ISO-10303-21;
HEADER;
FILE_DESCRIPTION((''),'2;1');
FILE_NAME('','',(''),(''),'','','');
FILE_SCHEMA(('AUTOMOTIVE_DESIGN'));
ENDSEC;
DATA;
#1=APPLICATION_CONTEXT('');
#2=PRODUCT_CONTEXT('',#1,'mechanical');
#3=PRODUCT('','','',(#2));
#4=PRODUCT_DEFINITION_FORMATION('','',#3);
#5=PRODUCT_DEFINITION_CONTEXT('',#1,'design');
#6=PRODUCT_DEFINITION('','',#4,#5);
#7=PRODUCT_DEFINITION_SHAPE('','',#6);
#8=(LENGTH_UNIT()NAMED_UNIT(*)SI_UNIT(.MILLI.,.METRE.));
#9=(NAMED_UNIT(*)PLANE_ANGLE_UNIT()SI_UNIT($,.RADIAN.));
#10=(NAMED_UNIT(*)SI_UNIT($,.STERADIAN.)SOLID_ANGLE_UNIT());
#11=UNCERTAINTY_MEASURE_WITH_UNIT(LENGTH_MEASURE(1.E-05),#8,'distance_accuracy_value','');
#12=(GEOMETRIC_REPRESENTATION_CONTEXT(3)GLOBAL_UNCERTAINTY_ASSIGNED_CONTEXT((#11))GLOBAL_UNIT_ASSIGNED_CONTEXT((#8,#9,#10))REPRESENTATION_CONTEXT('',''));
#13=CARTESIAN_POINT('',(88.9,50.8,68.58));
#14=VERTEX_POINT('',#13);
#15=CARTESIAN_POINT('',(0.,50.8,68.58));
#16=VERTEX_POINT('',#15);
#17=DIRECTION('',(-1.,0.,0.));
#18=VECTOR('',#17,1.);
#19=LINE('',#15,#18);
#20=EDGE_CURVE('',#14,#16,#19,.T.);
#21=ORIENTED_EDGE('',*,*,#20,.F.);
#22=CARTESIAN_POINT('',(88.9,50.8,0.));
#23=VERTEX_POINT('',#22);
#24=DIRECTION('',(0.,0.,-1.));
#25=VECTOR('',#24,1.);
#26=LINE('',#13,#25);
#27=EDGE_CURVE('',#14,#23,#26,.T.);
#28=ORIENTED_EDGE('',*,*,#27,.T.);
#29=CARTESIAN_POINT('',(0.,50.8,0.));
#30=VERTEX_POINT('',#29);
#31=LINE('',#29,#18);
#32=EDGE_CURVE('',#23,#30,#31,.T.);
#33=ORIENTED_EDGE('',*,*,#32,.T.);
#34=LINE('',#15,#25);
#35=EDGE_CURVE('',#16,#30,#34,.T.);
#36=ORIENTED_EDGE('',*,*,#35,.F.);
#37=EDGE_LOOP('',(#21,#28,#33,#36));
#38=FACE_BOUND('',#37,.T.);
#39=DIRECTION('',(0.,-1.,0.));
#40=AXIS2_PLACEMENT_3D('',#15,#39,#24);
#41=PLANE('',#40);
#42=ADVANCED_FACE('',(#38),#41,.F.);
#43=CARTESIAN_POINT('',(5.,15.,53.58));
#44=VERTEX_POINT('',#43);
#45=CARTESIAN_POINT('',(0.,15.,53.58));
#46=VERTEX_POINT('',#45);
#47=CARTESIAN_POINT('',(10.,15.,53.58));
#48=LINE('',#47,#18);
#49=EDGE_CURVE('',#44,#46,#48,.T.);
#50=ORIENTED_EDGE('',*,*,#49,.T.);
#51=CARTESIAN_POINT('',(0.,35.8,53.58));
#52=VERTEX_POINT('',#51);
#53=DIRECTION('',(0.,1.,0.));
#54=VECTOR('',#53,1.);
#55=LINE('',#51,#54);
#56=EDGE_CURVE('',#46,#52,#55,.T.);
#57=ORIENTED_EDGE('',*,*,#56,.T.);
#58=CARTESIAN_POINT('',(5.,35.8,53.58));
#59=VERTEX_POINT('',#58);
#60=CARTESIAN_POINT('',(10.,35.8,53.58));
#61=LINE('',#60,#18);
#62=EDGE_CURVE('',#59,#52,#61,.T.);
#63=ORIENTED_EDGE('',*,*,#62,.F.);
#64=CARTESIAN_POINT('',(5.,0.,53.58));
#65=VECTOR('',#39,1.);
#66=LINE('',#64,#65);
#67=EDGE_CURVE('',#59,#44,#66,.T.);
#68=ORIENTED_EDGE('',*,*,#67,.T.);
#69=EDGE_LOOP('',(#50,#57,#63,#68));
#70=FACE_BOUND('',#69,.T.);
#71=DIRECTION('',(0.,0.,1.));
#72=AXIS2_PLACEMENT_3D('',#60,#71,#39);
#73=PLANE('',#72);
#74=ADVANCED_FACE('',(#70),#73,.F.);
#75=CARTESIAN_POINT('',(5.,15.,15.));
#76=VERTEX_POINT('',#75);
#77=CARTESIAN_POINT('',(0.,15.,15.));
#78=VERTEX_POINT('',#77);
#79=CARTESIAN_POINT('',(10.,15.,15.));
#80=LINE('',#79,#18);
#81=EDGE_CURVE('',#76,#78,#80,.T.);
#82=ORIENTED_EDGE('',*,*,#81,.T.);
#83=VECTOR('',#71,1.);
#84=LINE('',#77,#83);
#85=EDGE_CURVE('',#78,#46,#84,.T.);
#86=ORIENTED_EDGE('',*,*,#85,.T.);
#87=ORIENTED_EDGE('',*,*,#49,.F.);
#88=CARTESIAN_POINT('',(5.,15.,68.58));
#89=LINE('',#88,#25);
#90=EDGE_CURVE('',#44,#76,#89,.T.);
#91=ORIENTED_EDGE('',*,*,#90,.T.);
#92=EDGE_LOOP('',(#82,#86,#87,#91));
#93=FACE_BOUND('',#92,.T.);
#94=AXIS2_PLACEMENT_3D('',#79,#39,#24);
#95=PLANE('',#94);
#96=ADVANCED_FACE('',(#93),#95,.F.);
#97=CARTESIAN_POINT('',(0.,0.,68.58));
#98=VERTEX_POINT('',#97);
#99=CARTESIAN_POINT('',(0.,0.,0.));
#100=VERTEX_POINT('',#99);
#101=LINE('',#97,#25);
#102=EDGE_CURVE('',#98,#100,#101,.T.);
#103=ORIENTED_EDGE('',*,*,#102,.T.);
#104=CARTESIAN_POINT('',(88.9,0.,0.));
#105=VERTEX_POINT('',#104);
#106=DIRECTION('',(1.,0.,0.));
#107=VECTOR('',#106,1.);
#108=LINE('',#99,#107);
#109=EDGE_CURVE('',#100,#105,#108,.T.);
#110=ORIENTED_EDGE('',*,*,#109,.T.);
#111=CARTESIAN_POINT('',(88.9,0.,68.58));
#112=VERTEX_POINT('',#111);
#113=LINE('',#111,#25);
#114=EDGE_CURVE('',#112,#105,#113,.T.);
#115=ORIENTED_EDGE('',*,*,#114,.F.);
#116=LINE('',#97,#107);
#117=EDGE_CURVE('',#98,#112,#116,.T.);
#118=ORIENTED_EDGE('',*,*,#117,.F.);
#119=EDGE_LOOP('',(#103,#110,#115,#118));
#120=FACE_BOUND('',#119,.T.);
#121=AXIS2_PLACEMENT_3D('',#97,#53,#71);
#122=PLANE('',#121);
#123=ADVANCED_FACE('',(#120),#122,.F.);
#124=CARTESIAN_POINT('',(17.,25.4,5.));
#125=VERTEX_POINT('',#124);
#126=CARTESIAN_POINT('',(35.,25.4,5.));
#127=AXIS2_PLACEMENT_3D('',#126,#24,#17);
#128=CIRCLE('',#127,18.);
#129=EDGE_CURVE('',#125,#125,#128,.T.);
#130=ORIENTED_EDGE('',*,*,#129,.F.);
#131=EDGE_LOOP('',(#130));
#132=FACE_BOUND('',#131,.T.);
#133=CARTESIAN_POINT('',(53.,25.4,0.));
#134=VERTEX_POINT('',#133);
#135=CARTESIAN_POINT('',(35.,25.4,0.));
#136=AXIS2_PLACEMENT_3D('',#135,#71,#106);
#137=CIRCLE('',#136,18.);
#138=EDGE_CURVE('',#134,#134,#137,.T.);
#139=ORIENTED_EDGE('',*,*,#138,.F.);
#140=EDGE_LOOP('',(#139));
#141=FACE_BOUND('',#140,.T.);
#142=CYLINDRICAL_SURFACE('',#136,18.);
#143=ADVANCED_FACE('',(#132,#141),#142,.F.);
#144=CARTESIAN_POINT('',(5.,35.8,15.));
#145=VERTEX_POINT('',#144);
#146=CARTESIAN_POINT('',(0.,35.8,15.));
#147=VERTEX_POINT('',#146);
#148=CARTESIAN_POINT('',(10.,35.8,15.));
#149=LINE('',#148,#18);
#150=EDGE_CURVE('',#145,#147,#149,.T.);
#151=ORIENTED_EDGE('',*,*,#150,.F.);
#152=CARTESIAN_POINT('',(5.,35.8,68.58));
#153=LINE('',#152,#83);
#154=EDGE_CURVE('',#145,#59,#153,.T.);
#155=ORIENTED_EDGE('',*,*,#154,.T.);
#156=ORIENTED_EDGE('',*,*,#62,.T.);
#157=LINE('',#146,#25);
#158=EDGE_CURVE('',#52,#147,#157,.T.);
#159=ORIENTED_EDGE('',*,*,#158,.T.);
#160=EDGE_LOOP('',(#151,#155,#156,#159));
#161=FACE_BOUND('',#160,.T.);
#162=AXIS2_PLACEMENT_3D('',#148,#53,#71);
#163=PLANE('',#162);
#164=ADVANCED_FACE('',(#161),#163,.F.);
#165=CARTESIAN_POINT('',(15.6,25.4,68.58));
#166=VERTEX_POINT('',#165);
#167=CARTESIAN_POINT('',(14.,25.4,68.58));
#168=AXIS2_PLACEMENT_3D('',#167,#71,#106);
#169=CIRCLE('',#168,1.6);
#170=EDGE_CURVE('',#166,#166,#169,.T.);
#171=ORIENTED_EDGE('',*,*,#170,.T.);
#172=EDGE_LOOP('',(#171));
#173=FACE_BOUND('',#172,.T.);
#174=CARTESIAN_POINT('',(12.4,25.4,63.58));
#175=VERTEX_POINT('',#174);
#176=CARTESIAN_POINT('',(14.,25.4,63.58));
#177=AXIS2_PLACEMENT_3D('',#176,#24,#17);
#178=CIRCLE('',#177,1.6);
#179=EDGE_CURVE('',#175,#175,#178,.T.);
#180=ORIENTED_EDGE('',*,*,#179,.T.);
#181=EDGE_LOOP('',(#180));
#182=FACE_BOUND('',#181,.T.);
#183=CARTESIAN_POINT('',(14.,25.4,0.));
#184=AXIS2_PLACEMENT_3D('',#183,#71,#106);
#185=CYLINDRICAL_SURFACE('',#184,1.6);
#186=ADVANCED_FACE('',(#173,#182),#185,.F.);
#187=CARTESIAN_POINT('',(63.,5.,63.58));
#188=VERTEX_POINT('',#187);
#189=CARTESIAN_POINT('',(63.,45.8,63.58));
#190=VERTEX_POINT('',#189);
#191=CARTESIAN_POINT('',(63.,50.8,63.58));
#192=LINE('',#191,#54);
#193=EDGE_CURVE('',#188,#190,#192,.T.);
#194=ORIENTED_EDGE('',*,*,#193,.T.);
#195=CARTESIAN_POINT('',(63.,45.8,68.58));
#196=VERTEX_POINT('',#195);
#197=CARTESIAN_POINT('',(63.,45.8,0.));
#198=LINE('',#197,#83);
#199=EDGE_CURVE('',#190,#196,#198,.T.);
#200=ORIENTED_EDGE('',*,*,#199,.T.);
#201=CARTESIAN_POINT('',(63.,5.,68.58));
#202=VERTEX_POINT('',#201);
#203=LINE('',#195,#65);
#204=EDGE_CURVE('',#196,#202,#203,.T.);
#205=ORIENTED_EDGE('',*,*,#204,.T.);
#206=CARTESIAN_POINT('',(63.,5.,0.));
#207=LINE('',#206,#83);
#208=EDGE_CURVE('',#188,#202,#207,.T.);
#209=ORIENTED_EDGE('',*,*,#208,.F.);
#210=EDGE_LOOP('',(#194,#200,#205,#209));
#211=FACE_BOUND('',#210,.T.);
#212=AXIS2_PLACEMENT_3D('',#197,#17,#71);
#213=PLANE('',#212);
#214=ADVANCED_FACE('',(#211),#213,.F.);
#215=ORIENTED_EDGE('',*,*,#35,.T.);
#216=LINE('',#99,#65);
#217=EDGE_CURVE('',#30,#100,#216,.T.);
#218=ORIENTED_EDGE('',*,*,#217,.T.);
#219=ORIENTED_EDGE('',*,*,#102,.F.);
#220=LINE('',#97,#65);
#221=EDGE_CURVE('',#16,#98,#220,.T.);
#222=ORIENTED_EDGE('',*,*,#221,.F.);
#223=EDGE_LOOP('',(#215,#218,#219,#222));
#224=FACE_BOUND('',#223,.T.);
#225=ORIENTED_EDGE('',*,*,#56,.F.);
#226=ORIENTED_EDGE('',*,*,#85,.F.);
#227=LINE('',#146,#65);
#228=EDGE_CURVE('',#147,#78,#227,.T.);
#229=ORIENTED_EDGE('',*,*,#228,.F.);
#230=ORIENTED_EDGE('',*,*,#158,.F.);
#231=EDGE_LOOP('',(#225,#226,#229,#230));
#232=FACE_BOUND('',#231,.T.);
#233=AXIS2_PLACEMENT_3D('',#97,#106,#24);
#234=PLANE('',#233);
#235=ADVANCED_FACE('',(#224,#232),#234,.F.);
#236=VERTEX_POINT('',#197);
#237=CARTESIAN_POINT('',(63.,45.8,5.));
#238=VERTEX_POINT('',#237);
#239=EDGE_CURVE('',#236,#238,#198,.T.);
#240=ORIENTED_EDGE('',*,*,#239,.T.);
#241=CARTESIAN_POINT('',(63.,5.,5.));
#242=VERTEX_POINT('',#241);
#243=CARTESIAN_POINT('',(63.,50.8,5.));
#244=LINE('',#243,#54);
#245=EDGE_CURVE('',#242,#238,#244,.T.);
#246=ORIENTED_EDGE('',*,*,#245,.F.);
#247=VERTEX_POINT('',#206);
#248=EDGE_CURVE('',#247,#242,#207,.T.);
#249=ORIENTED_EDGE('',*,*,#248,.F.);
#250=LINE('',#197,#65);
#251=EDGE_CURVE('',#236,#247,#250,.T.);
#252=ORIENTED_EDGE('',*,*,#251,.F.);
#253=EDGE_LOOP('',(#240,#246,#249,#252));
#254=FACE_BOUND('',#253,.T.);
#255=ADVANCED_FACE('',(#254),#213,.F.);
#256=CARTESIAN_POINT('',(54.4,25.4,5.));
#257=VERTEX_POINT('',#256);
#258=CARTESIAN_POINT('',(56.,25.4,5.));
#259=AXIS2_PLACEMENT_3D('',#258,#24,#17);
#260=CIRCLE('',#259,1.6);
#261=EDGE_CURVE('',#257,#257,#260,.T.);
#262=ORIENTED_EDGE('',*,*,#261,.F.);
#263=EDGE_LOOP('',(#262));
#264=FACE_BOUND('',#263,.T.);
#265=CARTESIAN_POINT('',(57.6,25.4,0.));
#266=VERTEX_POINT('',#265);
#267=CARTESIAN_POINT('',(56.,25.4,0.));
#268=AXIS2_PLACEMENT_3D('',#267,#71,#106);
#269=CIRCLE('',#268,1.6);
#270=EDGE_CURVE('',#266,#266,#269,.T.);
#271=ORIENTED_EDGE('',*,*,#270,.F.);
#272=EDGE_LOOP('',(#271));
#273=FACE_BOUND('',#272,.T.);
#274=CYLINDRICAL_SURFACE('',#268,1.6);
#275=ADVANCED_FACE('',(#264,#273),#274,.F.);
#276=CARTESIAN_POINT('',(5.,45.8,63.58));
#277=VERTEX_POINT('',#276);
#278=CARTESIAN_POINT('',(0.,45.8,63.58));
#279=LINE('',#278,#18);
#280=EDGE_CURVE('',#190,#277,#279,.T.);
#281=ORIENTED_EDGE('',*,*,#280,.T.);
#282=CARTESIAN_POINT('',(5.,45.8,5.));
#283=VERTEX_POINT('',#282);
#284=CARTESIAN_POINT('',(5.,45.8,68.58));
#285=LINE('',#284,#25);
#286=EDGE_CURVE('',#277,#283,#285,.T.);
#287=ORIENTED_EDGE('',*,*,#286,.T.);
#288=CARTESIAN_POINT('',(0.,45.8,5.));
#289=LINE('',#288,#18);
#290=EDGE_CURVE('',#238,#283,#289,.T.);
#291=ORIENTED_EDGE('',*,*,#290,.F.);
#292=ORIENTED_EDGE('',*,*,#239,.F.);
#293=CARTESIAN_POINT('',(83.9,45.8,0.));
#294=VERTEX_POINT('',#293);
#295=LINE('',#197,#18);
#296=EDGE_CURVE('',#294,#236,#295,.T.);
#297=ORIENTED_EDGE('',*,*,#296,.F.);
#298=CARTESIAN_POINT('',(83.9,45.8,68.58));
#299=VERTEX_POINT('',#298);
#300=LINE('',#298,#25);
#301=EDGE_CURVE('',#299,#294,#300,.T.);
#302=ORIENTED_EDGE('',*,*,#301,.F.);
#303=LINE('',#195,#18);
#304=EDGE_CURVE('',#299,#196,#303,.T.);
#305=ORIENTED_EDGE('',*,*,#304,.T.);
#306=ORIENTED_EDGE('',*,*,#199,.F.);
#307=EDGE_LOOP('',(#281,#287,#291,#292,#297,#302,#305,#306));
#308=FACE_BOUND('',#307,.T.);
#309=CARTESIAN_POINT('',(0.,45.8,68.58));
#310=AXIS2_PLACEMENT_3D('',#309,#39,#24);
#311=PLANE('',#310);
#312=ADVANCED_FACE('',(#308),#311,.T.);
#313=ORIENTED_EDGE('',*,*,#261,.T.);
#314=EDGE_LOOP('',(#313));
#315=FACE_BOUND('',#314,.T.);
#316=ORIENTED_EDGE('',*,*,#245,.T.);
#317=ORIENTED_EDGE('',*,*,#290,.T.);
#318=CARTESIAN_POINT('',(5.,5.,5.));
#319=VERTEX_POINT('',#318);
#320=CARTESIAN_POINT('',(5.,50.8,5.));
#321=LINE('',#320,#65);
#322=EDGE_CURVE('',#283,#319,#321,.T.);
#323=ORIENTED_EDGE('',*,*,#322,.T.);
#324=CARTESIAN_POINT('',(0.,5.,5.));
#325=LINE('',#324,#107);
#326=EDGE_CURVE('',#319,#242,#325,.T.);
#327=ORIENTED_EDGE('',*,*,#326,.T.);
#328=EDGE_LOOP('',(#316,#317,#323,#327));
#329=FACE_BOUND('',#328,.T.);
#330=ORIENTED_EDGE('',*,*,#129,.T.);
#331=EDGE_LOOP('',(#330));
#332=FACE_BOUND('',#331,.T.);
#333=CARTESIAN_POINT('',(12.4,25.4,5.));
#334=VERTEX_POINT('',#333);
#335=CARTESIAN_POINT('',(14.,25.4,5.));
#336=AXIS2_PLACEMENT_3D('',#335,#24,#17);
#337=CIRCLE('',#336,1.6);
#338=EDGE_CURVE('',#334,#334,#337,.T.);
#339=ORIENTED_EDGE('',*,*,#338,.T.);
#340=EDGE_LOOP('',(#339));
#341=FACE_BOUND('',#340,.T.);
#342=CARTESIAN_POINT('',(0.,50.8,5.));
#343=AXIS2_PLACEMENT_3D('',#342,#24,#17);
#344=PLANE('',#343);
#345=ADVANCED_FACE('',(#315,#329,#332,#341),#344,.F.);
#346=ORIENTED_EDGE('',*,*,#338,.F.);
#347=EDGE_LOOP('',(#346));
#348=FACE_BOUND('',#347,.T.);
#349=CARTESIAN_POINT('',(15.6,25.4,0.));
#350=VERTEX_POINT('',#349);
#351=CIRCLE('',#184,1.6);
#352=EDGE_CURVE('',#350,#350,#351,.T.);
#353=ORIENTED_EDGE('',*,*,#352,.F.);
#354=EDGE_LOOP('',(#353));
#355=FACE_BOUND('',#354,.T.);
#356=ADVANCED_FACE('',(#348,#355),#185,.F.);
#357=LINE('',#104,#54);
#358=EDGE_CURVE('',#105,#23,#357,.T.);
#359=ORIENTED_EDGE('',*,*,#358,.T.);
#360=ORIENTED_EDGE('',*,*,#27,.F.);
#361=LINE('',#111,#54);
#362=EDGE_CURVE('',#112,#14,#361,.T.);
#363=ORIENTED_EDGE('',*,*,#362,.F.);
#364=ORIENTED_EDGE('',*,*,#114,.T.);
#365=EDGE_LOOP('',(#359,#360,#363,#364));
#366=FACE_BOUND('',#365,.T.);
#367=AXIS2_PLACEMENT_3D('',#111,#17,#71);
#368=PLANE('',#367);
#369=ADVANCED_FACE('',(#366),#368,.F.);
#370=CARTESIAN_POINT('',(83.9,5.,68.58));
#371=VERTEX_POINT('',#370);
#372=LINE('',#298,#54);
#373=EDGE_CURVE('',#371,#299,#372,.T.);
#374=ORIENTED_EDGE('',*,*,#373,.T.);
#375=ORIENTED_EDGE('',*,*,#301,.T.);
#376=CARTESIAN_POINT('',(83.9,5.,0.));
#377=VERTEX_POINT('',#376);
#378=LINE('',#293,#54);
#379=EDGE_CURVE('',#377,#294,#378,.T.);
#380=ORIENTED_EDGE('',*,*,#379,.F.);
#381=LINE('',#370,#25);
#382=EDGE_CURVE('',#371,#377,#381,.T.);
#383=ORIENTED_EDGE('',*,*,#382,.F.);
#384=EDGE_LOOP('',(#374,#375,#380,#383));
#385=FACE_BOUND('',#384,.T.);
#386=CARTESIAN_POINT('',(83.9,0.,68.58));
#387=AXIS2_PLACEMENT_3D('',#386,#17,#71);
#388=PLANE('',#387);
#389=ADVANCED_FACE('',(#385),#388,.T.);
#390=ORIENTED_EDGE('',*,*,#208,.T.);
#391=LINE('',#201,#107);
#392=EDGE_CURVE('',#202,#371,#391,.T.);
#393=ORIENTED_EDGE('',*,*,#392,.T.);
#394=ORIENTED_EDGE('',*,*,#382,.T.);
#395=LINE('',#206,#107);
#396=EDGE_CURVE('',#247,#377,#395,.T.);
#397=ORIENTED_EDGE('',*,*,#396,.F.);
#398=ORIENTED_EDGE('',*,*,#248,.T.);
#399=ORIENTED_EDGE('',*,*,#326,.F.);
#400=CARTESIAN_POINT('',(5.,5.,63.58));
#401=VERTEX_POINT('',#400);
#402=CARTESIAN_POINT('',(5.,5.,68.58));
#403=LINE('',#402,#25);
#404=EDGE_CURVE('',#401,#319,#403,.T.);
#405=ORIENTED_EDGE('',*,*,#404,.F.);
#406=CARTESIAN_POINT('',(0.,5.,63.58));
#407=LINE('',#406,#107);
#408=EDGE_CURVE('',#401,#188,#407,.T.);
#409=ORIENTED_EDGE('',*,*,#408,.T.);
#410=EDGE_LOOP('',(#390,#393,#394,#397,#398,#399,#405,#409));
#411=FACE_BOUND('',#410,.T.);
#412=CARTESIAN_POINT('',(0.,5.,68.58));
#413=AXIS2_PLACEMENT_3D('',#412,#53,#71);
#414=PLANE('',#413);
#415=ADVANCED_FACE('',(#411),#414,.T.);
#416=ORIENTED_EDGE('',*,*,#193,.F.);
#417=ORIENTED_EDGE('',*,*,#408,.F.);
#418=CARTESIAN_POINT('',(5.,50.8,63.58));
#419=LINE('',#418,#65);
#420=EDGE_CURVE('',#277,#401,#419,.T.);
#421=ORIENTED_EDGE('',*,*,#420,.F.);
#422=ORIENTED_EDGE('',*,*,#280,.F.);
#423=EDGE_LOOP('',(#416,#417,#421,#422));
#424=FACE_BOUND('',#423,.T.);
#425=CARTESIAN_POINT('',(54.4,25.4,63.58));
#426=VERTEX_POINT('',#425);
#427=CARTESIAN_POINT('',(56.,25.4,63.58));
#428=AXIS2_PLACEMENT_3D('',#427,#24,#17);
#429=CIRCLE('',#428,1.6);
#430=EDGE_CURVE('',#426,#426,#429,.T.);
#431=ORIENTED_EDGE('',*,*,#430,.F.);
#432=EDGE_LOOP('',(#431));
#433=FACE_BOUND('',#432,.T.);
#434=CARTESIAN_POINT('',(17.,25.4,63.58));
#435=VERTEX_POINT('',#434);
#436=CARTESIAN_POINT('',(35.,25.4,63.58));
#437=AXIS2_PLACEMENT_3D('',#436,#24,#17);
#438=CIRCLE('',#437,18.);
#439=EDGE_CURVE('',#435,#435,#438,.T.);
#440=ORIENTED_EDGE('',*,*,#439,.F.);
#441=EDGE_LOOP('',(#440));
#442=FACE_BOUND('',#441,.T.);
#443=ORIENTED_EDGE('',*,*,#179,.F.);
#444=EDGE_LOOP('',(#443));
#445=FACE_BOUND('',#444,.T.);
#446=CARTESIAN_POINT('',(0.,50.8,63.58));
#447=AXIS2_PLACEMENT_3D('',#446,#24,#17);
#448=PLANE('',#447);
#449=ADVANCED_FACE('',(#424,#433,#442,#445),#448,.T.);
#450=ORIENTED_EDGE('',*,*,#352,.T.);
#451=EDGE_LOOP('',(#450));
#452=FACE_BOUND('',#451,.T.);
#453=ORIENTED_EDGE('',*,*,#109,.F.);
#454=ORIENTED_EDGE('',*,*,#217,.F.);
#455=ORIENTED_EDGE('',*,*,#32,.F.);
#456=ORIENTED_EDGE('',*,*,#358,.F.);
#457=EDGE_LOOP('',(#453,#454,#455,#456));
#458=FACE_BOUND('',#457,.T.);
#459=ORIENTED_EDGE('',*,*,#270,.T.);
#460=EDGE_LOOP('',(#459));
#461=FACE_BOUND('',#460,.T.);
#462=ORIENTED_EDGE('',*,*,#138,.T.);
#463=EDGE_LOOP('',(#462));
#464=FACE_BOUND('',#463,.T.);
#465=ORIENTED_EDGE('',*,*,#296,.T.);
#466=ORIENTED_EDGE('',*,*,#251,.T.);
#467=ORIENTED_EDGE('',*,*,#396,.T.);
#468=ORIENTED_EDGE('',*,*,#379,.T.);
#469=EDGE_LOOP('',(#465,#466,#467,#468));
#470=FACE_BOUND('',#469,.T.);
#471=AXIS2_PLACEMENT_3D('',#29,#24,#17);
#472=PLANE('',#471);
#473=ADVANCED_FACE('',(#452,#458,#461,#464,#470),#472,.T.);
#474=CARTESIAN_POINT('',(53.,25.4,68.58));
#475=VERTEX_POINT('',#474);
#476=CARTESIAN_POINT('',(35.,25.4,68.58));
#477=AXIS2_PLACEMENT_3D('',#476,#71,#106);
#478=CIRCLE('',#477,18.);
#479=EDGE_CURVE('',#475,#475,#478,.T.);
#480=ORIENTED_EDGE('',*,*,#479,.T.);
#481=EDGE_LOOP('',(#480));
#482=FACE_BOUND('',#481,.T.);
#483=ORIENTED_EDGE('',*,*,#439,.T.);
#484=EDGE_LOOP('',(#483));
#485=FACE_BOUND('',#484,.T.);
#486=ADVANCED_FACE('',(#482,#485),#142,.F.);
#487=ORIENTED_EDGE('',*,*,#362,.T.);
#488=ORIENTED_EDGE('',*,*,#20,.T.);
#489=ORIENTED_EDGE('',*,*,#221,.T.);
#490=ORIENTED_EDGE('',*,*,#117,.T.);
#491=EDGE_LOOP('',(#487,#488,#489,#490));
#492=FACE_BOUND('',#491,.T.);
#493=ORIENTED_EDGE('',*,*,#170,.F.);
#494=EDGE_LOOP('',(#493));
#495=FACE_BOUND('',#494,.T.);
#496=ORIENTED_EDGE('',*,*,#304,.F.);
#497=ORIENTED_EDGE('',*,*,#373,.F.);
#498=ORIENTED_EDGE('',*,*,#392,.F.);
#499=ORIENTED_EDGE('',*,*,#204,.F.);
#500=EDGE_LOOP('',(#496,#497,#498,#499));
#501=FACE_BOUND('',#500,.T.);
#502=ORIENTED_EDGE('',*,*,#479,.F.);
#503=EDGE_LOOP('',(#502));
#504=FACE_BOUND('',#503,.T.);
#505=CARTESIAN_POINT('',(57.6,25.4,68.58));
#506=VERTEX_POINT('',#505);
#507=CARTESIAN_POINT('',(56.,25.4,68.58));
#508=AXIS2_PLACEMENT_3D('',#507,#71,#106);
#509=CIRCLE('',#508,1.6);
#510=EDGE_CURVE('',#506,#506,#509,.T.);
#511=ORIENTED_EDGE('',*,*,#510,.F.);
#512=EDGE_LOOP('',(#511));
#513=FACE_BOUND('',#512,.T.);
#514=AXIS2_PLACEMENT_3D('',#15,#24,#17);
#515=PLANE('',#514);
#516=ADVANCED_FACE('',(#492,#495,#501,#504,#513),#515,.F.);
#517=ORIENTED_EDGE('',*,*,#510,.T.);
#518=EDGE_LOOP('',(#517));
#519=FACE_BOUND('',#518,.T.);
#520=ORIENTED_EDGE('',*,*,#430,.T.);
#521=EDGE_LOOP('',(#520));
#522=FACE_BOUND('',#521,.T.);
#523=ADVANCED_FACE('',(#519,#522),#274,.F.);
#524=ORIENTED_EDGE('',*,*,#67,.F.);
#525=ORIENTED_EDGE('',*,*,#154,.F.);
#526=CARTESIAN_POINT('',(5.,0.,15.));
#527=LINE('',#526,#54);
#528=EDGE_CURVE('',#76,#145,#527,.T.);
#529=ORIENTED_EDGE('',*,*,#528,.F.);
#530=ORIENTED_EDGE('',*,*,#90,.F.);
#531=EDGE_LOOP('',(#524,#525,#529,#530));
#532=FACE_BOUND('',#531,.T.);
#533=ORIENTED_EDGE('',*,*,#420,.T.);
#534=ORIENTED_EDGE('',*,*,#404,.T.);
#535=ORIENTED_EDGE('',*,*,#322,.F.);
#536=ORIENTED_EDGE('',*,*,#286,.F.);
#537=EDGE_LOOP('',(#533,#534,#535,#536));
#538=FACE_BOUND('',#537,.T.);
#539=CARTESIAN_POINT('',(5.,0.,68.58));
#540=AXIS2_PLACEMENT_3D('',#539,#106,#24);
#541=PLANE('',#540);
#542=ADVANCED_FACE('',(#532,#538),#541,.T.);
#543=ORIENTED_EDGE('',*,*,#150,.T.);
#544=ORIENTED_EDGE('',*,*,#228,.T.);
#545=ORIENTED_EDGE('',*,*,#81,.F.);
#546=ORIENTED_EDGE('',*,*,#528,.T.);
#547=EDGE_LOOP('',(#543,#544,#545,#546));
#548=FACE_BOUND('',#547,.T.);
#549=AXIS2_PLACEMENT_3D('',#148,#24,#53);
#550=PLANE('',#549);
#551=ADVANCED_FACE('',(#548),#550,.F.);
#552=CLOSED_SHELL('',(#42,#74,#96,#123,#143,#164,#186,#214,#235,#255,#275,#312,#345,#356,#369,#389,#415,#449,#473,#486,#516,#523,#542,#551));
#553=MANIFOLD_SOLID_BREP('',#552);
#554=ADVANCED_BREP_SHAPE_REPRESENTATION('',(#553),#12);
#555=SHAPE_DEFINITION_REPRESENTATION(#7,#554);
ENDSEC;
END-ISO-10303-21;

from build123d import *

# Parameters (mm, degrees)
SKETCH1_W           = 88.9
SKETCH1_H           = 50.8
BOSS_EXTRUDE1_DEPTH = 68.58
SHELL5_START        = 5
SHELL5_OUTLINE_W    = 40.8
SHELL5_OUTLINE_H    = 58.58
SHELL5_DEPTH        = 78.9
SKETCH2_R           = 18
SKETCH2_R_2         = 1.6
SKETCH2_W           = 20.9
SKETCH2_H           = 40.8
CUT_EXTRUDE2_DEPTH  = 68.58
SKETCH7_W           = 38.58
SKETCH7_H           = 20.8
CUT_EXTRUDE6_DEPTH  = 10


# Read off the part's stored shape, not the designer's step: Shell5
with BuildPart() as part:
    # Sketch1 → Boss-Extrude1 (new body)
    with BuildSketch(Plane.XY):
        with Locations((44.45, 25.4)):
            Rectangle(SKETCH1_W, SKETCH1_H)
    extrude(amount=BOSS_EXTRUDE1_DEPTH)

    # Shell5 outline → Shell5 (cut)
    with BuildSketch(Plane.YZ.offset(SHELL5_START)):
        with Locations((25.4, 34.29)):
            Rectangle(SHELL5_OUTLINE_W, SHELL5_OUTLINE_H)
    extrude(amount=SHELL5_DEPTH, mode=Mode.SUBTRACT)

    # Sketch2 → Cut-Extrude2 (cut)
    with BuildSketch(Plane.XY.offset(68.58)):
        with Locations((35, 25.4)):
            Circle(SKETCH2_R)
        with Locations((14, 25.4)):
            Circle(SKETCH2_R_2)
        with Locations((56, 25.4)):
            Circle(SKETCH2_R_2)
        with Locations((73.45, 25.4)):
            Rectangle(SKETCH2_W, SKETCH2_H)
    extrude(amount=-CUT_EXTRUDE2_DEPTH, mode=Mode.SUBTRACT)

    # Sketch7 → Cut-Extrude6 (cut)
    with BuildSketch(Plane.ZY):
        with Locations((34.29, 25.4)):
            Rectangle(SKETCH7_W, SKETCH7_H)
    extrude(amount=-CUT_EXTRUDE6_DEPTH, mode=Mode.SUBTRACT)


solid = part.part
